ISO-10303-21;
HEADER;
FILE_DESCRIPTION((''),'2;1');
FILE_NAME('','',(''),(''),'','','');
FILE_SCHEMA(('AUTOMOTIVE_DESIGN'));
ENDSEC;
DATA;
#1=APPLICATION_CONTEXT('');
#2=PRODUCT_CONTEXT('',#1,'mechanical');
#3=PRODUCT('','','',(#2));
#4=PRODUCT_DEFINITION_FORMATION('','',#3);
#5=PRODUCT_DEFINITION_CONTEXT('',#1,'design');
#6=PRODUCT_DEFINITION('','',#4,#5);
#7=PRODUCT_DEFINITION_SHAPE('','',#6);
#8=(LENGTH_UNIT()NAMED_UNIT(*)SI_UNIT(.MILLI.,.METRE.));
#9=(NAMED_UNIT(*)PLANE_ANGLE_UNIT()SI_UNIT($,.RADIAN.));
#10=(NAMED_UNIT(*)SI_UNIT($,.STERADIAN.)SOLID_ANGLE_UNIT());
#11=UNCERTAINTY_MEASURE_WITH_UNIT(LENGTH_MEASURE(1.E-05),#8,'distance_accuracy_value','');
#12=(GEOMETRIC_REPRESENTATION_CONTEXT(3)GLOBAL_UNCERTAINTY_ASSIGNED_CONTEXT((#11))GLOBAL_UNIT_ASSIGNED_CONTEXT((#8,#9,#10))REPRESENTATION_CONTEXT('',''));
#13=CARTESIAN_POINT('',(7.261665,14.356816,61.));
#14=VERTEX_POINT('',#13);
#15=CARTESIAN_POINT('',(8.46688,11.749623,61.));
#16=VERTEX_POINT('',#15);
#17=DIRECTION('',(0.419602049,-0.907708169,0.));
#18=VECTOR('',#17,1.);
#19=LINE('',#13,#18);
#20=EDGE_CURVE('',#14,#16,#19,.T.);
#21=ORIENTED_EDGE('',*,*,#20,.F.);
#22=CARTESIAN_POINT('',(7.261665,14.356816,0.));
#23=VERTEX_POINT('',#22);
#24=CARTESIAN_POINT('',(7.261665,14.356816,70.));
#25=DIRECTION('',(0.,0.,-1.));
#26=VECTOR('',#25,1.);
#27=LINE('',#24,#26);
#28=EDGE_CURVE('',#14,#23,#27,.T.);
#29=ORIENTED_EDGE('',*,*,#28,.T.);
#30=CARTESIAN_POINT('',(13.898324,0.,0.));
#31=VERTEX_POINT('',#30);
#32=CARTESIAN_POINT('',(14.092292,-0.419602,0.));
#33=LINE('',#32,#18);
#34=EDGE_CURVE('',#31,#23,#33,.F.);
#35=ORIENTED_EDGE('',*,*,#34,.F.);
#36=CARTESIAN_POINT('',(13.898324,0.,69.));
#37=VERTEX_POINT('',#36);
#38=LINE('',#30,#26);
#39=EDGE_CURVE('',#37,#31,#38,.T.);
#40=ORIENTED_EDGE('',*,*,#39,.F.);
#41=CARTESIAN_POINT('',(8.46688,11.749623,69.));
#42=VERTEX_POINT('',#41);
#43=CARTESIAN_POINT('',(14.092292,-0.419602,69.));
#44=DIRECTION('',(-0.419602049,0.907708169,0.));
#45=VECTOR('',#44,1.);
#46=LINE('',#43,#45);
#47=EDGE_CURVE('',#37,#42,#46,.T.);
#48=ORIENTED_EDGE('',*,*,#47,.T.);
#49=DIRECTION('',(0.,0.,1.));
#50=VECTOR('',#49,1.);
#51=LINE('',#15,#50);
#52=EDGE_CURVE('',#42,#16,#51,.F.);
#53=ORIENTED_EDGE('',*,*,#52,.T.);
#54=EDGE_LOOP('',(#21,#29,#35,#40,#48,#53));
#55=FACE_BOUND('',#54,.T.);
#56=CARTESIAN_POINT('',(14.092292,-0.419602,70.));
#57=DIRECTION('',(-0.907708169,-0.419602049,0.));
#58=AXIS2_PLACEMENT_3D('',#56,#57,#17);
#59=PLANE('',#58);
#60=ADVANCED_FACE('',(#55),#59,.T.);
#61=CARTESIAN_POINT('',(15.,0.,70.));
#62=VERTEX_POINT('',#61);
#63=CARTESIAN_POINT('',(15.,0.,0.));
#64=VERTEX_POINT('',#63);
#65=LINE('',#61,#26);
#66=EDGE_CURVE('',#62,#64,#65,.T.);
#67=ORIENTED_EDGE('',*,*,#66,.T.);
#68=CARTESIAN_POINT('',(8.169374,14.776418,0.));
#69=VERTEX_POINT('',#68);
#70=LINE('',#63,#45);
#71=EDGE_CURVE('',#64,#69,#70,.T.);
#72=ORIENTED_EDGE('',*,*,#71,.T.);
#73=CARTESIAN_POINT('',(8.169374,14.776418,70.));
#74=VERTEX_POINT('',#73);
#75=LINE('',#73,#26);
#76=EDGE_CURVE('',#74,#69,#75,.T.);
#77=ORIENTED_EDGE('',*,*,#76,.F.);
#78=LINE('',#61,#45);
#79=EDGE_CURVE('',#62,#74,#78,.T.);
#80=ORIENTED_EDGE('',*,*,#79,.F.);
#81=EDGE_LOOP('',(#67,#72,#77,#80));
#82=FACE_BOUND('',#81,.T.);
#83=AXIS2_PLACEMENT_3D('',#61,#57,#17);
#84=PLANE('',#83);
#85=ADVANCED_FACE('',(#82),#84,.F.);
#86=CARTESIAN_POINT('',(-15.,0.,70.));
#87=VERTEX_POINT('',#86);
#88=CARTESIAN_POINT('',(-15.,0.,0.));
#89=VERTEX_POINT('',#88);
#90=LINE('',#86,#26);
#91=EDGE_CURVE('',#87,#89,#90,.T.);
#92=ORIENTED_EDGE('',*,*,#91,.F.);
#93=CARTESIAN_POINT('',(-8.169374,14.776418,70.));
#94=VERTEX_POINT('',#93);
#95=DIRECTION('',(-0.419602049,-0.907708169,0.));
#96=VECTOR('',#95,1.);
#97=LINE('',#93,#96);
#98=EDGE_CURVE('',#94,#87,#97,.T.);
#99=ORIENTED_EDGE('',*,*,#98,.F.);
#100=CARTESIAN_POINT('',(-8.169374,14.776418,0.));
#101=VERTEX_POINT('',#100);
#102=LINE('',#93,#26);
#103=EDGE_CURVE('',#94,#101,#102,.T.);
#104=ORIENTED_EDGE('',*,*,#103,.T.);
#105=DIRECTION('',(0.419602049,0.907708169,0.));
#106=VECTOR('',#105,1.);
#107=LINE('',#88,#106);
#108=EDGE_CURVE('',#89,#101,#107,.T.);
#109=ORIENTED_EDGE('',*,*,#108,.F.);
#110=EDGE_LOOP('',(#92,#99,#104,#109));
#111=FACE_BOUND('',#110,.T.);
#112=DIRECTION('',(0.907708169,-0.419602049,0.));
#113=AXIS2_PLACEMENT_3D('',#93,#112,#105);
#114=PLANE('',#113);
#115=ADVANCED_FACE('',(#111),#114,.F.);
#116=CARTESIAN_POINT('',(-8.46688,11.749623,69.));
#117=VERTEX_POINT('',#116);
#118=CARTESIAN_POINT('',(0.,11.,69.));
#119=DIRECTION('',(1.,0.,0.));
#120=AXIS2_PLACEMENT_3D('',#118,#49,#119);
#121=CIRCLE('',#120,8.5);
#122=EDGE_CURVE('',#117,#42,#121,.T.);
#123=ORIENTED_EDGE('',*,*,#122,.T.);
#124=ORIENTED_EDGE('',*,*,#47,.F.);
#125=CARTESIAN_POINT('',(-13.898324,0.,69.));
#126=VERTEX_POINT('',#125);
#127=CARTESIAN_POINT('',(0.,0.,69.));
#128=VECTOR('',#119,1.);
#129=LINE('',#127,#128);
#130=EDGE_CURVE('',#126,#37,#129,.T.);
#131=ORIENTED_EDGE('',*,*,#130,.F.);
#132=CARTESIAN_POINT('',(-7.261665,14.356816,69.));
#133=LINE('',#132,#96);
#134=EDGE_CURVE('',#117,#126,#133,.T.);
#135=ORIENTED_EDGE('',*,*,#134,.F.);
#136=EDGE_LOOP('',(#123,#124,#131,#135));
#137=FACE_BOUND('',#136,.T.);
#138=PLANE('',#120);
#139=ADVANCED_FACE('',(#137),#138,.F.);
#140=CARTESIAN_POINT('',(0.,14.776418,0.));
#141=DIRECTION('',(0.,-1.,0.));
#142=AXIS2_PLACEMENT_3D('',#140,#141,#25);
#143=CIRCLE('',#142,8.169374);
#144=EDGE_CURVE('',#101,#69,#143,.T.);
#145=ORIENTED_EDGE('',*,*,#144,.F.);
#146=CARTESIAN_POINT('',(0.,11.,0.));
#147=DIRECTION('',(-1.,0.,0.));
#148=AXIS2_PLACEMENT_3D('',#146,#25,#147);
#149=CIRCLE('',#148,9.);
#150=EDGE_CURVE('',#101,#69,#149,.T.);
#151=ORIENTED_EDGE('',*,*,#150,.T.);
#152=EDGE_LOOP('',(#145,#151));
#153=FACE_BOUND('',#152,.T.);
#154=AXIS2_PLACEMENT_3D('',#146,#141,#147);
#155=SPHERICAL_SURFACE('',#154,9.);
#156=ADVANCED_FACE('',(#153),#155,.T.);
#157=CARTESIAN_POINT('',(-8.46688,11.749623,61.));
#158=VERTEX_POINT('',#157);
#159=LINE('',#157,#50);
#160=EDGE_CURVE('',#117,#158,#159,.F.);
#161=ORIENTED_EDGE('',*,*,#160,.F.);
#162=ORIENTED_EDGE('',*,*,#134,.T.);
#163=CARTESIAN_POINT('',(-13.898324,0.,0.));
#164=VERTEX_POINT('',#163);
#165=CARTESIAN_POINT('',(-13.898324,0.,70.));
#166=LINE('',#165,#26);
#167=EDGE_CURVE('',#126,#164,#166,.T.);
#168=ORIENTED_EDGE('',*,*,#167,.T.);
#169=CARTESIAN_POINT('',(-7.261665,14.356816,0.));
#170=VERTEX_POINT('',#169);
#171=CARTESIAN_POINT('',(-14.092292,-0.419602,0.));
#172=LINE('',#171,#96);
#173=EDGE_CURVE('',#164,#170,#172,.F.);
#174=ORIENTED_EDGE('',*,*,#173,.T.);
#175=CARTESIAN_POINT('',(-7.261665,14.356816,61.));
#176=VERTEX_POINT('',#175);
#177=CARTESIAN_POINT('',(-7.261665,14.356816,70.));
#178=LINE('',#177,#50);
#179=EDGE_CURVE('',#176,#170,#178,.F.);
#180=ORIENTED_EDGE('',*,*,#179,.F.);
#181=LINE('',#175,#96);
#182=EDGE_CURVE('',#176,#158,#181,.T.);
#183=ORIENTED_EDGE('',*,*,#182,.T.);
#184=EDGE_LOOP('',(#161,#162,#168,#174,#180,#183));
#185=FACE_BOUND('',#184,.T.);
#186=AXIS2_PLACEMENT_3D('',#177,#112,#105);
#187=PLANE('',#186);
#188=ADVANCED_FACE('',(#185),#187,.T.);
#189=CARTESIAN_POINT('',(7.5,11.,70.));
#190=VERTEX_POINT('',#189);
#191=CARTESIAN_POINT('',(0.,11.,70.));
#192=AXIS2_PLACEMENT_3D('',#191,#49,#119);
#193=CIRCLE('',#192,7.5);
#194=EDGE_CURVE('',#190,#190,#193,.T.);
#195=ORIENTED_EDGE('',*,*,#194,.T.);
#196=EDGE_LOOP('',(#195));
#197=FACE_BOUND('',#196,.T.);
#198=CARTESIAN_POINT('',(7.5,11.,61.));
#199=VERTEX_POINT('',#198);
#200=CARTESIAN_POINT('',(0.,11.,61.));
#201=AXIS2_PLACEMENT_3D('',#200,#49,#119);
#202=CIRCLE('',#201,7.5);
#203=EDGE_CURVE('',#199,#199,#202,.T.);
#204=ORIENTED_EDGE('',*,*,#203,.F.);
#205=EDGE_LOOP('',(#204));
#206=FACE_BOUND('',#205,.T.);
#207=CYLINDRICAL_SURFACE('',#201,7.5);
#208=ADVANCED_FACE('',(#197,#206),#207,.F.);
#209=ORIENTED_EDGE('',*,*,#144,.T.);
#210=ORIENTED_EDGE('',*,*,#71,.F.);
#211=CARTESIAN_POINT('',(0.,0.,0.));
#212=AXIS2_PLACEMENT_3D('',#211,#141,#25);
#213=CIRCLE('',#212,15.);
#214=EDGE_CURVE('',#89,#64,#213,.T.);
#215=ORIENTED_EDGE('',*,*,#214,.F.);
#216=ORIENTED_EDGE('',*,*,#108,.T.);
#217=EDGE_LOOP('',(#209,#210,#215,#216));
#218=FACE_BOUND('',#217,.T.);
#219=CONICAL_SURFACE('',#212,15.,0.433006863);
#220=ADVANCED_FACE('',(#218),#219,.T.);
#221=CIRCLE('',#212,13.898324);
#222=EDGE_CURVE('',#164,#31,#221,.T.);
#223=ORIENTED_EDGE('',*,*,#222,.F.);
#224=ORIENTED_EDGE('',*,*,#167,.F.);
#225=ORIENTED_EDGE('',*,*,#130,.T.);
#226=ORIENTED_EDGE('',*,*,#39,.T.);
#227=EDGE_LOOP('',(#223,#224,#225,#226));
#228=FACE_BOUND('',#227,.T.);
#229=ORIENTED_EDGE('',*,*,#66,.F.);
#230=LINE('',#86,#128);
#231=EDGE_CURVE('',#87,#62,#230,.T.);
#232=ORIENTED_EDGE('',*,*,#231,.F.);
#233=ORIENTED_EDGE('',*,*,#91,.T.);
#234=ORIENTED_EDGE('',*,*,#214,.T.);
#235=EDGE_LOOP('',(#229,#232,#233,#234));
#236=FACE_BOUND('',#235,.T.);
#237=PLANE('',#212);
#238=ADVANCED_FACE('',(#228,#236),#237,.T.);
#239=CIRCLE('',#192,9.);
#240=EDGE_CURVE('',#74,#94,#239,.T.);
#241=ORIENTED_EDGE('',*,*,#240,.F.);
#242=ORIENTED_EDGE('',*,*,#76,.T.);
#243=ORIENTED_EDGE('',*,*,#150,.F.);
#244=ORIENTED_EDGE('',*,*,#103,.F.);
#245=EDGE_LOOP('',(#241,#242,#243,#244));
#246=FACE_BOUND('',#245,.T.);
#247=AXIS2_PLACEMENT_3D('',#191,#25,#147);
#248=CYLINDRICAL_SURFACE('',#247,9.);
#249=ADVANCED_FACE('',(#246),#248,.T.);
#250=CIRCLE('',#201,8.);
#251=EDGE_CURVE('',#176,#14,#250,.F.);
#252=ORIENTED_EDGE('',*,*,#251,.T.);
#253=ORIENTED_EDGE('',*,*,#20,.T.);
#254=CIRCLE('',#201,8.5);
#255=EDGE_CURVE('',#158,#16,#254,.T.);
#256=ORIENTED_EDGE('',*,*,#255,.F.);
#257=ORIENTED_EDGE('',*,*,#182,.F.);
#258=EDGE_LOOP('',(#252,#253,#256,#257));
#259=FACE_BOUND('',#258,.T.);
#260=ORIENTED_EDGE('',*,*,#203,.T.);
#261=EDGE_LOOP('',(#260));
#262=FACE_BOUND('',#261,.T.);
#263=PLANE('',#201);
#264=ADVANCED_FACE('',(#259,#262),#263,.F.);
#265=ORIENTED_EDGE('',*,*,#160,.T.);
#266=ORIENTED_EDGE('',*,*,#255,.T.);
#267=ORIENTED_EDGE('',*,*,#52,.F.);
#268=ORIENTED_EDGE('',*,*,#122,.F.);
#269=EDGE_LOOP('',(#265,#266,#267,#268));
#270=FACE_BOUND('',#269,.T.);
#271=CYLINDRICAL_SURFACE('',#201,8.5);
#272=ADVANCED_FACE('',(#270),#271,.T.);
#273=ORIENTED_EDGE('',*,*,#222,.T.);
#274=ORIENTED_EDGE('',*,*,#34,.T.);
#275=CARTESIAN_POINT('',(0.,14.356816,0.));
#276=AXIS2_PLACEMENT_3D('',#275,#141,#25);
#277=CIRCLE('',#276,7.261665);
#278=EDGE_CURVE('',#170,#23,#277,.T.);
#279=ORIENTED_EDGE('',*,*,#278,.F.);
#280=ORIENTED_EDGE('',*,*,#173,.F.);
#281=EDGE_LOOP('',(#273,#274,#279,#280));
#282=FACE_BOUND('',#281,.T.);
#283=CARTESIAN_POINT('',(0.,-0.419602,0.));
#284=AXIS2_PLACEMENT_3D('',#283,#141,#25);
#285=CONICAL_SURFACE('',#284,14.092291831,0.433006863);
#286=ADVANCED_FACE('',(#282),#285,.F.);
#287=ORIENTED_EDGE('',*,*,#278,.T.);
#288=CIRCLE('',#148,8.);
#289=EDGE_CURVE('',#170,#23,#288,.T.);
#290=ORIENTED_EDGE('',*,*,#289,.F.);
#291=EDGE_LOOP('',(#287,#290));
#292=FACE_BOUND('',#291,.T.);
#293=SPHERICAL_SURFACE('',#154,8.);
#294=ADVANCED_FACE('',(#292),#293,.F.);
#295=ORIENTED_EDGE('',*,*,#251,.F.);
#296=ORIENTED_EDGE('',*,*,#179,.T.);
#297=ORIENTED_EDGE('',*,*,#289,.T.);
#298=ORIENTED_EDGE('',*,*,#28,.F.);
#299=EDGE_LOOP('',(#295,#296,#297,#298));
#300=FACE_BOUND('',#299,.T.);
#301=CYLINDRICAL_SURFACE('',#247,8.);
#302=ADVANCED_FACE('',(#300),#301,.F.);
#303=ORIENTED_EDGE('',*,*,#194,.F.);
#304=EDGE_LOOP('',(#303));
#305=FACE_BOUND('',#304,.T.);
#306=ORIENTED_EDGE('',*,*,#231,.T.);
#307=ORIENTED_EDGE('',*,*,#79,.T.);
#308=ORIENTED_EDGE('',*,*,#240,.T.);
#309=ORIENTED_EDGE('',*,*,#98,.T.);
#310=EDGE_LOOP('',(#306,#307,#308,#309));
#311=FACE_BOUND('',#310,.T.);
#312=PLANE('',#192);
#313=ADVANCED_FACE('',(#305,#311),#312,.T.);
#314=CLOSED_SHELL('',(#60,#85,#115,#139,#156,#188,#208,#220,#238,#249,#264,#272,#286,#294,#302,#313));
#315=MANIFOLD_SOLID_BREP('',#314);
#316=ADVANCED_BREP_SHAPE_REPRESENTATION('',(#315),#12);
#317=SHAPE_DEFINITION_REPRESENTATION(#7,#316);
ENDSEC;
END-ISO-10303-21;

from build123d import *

# Parameters (mm, degrees)
REVOLVE1_ANGLE      = 180
BOSS_EXTRUDE1_DEPTH = 70
SKETCH4_R           = 7.5
CUT_EXTRUDE1_DEPTH  = 9
SHELL1_DEPTH        = 61
SHELL1_START        = 61
SHELL1_2_DEPTH      = 8
SHELL1_3_ANGLE      = 180


with BuildPart() as part:
    # Sketch2 → Revolve1 (revolve)
    with BuildSketch(Plane.XY):
        with BuildLine():
            Line((0, 0), (0, 20))
            ThreePointArc((0, 20), (4.848310738, 18.582472089), (8.169373523, 14.776418441))
            Line((8.169373523, 14.776418441), (15, 0))
            Line((15, 0), (0, 0))
        make_face()
    revolve(axis=Axis((0, 0, 0), (0, 1, 0)), revolution_arc=REVOLVE1_ANGLE)

    # Sketch3 → Boss-Extrude1 (add)
    with BuildSketch(Plane.XY):
        with BuildLine():
            Line((-15, 0), (15, 0))
            Line((15, 0), (8.169373523, 14.776418441))
            ThreePointArc((8.169373523, 14.776418441), (0, 20), (-8.169373523, 14.776418441))
            Line((-8.169373523, 14.776418441), (-15, 0))
        make_face()
    extrude(amount=BOSS_EXTRUDE1_DEPTH)

    # Sketch4 → Cut-Extrude1 (cut)
    with BuildSketch(Plane.XY.offset(70)):
        with Locations((0, 11)):
            Circle(SKETCH4_R)
    extrude(amount=-CUT_EXTRUDE1_DEPTH, mode=Mode.SUBTRACT)

    # Shell1: read off the stored shape, not the designer's step
    # Shell1 outline → Shell1 (cut)
    with BuildSketch(Plane.XY):
        with BuildLine():
            Line((-13.898324336, 0), (13.898324336, 0))
            Line((13.898324336, 0), (7.261665354, 14.356816392))
            ThreePointArc((7.261665354, 14.356816392), (0, 19), (-7.261665354, 14.356816392))
            Line((-7.261665354, 14.356816392), (-13.898324336, 0))
        make_face()
    extrude(amount=SHELL1_DEPTH, mode=Mode.SUBTRACT)

    # Shell1 2 outline → Shell1 2 (cut)
    with BuildSketch(Plane.XY.offset(SHELL1_START)):
        with BuildLine():
            Line((-8.466880482, 11.74962317), (-13.898324336, 0))
            Line((-13.898324336, 0), (13.898324336, 0))
            Line((13.898324336, 0), (8.466880482, 11.74962317))
            ThreePointArc((8.466880482, 11.74962317), (0, 2.5), (-8.466880482, 11.74962317))
        make_face()
    extrude(amount=SHELL1_2_DEPTH, mode=Mode.SUBTRACT)

    # Shell1 3 outline → Shell1 3 (revolve, cut)
    with BuildSketch(Plane.XY):
        with BuildLine():
            Line((13.898324336, 0), (7.261665354, 14.356816392))
            ThreePointArc((7.261665354, 14.356816392), (4.309609545, 17.73997519), (0, 19))
            Line((0, 19), (0, 0))
            Line((0, 0), (13.898324336, 0))
        make_face()
    revolve(axis=Axis((0, 0, 0), (0, 1, 0)), revolution_arc=SHELL1_3_ANGLE, mode=Mode.SUBTRACT)


solid = part.part
